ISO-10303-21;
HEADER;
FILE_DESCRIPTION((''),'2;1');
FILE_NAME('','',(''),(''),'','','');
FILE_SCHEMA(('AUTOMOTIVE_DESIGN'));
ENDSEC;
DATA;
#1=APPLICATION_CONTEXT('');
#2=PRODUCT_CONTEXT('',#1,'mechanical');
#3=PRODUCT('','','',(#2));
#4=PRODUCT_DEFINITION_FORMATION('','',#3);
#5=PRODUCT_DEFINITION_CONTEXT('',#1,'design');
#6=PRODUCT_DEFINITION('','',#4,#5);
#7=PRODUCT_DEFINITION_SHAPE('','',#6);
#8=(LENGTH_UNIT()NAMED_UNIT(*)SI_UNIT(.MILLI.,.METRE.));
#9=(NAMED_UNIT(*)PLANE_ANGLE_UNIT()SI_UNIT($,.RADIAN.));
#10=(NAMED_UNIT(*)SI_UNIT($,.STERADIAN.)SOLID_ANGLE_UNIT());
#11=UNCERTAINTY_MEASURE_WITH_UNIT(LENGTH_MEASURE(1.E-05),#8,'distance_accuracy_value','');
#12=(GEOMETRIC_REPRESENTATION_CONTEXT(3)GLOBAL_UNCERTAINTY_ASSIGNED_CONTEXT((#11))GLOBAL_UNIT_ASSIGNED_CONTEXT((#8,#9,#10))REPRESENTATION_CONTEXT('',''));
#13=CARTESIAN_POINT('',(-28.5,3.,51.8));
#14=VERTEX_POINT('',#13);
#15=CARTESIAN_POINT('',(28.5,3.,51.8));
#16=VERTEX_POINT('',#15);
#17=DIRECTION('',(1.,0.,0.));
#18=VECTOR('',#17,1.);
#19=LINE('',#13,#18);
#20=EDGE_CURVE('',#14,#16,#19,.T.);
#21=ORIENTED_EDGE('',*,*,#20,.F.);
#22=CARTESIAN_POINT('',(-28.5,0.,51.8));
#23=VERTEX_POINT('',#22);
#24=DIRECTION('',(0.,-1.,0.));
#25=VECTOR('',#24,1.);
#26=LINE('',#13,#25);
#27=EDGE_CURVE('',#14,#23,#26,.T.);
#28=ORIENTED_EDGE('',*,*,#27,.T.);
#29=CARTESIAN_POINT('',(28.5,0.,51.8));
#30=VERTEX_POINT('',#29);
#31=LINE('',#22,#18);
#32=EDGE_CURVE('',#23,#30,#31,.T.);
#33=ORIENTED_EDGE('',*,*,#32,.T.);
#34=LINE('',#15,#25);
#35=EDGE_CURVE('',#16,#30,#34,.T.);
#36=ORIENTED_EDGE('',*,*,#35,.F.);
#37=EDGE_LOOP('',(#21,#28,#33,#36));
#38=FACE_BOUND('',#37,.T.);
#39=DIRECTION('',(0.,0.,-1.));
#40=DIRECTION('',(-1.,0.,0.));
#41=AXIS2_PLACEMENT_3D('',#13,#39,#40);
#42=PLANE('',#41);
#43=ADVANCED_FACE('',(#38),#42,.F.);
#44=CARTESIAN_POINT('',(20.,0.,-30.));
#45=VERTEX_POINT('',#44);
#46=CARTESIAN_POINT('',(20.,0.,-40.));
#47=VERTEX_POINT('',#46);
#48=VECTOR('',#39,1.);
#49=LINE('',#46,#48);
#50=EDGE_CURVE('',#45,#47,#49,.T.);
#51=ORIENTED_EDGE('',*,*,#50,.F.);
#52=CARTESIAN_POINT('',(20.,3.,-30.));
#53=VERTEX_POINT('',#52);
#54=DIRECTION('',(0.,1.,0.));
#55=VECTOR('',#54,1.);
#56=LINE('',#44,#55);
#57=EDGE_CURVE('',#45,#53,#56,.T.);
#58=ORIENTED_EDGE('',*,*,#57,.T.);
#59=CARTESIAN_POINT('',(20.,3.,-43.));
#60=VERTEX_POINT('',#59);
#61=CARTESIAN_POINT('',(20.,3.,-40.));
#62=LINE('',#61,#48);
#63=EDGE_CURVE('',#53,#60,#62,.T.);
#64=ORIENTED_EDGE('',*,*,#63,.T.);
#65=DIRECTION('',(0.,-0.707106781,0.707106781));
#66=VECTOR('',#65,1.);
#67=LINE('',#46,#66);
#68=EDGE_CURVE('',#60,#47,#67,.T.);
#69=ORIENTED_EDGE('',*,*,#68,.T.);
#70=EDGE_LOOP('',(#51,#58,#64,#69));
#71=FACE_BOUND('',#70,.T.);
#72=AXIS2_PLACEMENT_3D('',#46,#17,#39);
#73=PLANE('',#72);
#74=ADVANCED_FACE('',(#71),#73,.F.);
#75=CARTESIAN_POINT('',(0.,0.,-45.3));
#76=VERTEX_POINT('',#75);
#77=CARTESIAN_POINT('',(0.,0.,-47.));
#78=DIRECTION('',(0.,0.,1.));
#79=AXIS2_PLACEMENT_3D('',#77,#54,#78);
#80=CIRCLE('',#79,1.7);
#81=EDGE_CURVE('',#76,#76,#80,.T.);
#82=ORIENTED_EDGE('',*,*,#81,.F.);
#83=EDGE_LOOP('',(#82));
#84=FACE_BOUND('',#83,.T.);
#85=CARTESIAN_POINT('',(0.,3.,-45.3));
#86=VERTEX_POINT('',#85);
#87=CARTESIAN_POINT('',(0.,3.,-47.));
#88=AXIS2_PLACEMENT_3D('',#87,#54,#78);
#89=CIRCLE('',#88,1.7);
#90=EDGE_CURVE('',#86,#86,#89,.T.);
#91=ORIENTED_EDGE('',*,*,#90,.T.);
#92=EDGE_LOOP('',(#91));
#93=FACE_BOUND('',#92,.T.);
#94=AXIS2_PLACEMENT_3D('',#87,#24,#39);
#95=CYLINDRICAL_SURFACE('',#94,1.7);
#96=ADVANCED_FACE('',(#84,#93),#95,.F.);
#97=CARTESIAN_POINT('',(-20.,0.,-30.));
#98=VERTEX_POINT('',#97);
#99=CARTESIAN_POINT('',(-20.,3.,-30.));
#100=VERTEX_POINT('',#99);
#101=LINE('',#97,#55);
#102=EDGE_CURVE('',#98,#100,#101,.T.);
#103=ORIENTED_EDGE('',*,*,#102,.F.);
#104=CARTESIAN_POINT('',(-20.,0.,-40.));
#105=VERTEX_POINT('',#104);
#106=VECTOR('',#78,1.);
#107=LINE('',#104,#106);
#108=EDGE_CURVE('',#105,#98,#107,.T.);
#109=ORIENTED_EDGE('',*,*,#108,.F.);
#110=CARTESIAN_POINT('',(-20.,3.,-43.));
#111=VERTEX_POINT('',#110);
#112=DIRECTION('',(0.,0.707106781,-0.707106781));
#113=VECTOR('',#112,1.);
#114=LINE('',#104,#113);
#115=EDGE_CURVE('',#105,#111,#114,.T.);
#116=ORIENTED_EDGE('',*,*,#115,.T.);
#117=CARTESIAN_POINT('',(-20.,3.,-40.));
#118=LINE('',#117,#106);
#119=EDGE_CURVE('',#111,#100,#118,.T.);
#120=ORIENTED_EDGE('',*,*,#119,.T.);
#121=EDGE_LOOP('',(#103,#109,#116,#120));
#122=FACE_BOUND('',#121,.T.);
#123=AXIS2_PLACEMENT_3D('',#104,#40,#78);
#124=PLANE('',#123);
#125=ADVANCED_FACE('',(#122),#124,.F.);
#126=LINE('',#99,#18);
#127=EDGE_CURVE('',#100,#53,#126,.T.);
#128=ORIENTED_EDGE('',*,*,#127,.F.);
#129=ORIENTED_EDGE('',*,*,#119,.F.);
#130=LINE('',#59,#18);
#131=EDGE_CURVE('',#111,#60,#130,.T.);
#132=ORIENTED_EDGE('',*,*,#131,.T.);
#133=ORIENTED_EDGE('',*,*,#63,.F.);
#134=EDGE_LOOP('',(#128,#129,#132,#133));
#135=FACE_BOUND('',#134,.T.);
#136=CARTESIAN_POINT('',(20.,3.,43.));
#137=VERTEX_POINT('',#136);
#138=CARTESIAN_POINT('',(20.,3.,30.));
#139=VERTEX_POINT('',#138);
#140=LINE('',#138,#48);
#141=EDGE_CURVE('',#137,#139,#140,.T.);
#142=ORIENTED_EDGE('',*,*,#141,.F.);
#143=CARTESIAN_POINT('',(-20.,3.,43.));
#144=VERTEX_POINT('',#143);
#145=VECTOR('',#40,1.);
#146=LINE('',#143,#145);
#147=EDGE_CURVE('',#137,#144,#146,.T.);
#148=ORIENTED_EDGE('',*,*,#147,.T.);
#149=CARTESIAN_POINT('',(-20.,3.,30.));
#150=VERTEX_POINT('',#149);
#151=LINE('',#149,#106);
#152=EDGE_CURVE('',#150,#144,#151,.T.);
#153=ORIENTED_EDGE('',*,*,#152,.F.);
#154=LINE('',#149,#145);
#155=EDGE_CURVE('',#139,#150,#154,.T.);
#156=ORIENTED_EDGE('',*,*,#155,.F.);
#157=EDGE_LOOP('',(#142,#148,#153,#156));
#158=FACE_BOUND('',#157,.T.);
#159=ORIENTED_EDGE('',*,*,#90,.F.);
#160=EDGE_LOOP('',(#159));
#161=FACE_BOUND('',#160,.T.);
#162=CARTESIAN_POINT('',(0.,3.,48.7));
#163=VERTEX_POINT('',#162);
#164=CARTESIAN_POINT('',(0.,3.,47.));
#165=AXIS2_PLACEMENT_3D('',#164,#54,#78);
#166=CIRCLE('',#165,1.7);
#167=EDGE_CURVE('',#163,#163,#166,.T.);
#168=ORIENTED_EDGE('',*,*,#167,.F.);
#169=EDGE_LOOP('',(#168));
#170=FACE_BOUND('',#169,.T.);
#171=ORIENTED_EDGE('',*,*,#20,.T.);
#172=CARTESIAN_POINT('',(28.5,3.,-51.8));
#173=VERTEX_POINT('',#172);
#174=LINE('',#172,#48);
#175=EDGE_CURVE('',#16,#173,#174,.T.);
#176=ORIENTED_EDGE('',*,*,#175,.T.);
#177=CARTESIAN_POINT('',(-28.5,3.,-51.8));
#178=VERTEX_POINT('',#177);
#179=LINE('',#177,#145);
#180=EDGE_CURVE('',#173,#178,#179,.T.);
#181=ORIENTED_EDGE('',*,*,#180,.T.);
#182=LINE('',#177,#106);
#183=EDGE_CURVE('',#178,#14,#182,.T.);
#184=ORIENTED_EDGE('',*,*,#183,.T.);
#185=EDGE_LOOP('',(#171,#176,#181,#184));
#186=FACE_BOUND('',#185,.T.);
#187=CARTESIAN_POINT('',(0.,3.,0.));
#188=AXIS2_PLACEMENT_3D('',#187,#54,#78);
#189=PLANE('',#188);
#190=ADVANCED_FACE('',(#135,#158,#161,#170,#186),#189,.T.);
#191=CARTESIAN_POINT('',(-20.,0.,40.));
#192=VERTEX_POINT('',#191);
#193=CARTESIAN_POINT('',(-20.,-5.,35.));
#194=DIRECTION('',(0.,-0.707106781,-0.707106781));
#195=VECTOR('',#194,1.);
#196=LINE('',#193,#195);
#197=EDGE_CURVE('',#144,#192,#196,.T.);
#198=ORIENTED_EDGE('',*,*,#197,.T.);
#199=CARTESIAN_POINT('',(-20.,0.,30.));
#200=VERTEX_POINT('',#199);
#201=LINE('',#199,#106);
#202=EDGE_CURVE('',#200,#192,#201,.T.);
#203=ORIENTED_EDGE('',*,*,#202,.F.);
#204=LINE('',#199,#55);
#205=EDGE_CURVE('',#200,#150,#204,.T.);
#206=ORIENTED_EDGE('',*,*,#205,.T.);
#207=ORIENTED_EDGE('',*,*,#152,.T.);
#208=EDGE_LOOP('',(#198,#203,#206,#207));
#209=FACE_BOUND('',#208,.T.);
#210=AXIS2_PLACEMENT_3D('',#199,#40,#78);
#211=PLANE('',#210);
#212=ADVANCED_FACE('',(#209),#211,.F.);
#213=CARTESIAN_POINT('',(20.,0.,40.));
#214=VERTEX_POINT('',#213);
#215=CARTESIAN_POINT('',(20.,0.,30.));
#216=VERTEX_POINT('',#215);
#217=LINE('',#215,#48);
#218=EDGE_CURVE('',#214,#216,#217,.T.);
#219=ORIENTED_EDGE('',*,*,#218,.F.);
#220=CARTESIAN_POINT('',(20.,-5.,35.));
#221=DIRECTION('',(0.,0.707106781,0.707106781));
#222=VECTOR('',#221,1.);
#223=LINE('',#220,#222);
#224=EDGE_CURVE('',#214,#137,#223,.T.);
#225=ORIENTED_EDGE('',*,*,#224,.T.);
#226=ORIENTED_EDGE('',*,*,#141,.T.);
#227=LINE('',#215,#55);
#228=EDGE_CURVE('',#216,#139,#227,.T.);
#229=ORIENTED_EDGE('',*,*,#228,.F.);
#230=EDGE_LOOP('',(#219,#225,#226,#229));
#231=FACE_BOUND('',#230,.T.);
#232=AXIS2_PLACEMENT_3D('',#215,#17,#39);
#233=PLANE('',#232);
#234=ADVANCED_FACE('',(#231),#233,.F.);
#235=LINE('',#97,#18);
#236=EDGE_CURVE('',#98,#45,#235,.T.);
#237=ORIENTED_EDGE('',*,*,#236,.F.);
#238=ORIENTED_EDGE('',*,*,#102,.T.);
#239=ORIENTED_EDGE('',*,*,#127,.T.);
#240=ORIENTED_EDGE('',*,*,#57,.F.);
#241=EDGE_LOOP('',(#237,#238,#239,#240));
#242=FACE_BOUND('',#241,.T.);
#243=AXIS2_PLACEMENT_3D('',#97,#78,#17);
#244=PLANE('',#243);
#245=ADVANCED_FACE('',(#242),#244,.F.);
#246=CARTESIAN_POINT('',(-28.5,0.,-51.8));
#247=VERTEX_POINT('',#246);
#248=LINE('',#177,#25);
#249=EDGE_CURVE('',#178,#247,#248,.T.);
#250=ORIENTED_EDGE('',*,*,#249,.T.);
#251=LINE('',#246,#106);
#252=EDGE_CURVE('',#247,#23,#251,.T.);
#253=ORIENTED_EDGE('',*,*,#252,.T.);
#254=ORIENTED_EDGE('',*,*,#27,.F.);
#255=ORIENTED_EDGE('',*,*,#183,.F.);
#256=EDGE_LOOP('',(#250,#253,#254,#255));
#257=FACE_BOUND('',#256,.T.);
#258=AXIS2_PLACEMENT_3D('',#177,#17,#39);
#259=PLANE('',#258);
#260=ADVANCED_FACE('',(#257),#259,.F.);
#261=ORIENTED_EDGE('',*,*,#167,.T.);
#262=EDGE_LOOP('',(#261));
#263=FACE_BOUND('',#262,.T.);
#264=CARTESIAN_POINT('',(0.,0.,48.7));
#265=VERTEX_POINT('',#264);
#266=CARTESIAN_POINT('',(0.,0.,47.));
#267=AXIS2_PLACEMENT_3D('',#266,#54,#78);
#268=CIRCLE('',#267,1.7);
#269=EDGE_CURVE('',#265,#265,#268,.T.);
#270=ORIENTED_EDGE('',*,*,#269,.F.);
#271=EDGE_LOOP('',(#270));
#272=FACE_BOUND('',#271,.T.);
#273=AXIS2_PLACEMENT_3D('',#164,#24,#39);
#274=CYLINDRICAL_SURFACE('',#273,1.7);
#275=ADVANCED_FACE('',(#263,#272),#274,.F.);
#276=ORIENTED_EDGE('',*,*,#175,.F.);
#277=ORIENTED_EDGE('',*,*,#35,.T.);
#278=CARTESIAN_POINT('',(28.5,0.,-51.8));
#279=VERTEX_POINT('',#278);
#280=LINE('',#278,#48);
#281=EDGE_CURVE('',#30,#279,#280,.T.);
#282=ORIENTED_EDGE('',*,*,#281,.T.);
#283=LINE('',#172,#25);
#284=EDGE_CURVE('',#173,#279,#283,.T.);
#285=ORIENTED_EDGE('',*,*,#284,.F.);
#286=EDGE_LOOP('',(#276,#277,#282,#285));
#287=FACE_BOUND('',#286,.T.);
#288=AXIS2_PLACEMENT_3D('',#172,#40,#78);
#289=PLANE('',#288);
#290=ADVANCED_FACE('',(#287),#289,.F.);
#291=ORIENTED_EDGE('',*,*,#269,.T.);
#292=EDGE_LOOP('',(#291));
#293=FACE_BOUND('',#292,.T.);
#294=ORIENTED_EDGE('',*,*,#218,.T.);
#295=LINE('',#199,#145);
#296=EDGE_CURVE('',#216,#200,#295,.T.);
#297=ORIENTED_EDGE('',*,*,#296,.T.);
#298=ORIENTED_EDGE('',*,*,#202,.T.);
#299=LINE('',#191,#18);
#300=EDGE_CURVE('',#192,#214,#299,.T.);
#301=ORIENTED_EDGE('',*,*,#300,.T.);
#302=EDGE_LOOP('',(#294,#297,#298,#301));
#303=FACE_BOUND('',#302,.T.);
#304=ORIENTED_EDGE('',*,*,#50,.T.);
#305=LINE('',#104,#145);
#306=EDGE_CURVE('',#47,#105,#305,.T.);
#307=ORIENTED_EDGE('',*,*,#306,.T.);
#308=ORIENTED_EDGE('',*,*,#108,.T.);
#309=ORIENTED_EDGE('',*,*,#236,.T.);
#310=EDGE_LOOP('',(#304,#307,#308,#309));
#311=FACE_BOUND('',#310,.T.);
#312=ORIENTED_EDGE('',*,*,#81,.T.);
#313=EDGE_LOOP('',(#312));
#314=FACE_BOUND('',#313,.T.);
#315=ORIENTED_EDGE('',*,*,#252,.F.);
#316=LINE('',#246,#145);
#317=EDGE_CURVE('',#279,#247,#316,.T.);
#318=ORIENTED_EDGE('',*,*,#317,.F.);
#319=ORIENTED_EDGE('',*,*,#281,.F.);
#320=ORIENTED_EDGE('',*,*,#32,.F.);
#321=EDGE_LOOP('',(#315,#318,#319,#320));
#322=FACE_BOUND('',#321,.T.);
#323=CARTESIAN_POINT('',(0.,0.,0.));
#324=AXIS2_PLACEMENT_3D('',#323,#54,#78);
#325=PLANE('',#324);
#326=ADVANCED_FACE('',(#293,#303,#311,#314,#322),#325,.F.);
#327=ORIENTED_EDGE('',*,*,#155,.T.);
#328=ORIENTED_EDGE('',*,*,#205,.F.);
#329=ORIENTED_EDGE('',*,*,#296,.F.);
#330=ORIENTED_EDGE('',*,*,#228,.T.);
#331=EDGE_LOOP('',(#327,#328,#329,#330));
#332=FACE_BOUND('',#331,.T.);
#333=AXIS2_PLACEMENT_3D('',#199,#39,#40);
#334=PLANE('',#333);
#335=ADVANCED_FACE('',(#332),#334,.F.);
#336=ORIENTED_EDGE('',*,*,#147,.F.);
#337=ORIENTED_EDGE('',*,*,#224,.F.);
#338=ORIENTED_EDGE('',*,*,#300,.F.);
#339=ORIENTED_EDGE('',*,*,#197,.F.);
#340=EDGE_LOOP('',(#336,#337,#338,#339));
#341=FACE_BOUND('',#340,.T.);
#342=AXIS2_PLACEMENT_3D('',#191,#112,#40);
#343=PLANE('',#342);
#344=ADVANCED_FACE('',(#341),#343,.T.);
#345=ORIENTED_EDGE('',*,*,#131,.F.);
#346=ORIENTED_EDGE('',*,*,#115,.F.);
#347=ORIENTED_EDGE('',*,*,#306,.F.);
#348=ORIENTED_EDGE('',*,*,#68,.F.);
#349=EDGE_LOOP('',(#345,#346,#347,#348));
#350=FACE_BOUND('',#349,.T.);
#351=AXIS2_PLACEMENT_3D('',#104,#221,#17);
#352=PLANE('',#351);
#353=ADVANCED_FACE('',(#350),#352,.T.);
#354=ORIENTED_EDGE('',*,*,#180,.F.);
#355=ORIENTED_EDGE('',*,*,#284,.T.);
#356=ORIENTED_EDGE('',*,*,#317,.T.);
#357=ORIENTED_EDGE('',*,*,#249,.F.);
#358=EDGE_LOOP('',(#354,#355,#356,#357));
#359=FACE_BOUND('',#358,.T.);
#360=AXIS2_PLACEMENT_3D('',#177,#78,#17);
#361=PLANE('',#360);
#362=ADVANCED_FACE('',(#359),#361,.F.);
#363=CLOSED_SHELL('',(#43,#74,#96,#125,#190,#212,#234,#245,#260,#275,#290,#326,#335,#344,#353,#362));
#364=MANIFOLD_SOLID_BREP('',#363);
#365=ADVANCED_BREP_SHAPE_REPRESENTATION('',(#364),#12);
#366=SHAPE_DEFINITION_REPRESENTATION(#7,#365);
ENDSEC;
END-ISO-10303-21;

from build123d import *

# Parameters (mm, degrees)
SKETCH_1_W          = 57
SKETCH_1_H          = 103.6
SKETCH_1_R          = 1.7
EXTRUDE_1_DEPTH     = 3
SKETCH_2_W          = 40
SKETCH_2_H          = 10
CUT_EXTRUDE_1_DEPTH = 3
CHAMFER_1_SIZE      = 3


with BuildPart() as part:
    # 草图1 → 凸台-拉伸1 (new body)
    with BuildSketch(Plane(origin=(0, 0, 0), x_dir=(1, 0, 0), z_dir=(0, 1, 0))):
        Rectangle(SKETCH_1_W, SKETCH_1_H)
        with Locations(Location((0, 47, 0), (0, 0, 270))):
            Circle(SKETCH_1_R, mode=Mode.SUBTRACT)
        with Locations(Location((0, -47, 0), (0, 0, 270))):
            Circle(SKETCH_1_R, mode=Mode.SUBTRACT)
    extrude(amount=EXTRUDE_1_DEPTH)

    # 草图2 → 切除-拉伸1 (cut)
    with BuildSketch(Plane(origin=(0, 3, 0), x_dir=(1, 0, 0), z_dir=(0, 1, 0))):
        with Locations((0, 35)):
            Rectangle(SKETCH_2_W, SKETCH_2_H)
        with Locations((0, -35)):
            Rectangle(SKETCH_2_W, SKETCH_2_H)
    extrude(amount=-CUT_EXTRUDE_1_DEPTH, mode=Mode.SUBTRACT)

    # 倒角1
    chamfer_1_edges = [part.edges().sort_by_distance(p)[0] for p in [
        (0, 3, 40),
        (0, 3, -40),
    ]]
    chamfer(chamfer_1_edges, length=CHAMFER_1_SIZE - 0.0001)  # a hair under: the kernel refuses the full size


solid = part.part
